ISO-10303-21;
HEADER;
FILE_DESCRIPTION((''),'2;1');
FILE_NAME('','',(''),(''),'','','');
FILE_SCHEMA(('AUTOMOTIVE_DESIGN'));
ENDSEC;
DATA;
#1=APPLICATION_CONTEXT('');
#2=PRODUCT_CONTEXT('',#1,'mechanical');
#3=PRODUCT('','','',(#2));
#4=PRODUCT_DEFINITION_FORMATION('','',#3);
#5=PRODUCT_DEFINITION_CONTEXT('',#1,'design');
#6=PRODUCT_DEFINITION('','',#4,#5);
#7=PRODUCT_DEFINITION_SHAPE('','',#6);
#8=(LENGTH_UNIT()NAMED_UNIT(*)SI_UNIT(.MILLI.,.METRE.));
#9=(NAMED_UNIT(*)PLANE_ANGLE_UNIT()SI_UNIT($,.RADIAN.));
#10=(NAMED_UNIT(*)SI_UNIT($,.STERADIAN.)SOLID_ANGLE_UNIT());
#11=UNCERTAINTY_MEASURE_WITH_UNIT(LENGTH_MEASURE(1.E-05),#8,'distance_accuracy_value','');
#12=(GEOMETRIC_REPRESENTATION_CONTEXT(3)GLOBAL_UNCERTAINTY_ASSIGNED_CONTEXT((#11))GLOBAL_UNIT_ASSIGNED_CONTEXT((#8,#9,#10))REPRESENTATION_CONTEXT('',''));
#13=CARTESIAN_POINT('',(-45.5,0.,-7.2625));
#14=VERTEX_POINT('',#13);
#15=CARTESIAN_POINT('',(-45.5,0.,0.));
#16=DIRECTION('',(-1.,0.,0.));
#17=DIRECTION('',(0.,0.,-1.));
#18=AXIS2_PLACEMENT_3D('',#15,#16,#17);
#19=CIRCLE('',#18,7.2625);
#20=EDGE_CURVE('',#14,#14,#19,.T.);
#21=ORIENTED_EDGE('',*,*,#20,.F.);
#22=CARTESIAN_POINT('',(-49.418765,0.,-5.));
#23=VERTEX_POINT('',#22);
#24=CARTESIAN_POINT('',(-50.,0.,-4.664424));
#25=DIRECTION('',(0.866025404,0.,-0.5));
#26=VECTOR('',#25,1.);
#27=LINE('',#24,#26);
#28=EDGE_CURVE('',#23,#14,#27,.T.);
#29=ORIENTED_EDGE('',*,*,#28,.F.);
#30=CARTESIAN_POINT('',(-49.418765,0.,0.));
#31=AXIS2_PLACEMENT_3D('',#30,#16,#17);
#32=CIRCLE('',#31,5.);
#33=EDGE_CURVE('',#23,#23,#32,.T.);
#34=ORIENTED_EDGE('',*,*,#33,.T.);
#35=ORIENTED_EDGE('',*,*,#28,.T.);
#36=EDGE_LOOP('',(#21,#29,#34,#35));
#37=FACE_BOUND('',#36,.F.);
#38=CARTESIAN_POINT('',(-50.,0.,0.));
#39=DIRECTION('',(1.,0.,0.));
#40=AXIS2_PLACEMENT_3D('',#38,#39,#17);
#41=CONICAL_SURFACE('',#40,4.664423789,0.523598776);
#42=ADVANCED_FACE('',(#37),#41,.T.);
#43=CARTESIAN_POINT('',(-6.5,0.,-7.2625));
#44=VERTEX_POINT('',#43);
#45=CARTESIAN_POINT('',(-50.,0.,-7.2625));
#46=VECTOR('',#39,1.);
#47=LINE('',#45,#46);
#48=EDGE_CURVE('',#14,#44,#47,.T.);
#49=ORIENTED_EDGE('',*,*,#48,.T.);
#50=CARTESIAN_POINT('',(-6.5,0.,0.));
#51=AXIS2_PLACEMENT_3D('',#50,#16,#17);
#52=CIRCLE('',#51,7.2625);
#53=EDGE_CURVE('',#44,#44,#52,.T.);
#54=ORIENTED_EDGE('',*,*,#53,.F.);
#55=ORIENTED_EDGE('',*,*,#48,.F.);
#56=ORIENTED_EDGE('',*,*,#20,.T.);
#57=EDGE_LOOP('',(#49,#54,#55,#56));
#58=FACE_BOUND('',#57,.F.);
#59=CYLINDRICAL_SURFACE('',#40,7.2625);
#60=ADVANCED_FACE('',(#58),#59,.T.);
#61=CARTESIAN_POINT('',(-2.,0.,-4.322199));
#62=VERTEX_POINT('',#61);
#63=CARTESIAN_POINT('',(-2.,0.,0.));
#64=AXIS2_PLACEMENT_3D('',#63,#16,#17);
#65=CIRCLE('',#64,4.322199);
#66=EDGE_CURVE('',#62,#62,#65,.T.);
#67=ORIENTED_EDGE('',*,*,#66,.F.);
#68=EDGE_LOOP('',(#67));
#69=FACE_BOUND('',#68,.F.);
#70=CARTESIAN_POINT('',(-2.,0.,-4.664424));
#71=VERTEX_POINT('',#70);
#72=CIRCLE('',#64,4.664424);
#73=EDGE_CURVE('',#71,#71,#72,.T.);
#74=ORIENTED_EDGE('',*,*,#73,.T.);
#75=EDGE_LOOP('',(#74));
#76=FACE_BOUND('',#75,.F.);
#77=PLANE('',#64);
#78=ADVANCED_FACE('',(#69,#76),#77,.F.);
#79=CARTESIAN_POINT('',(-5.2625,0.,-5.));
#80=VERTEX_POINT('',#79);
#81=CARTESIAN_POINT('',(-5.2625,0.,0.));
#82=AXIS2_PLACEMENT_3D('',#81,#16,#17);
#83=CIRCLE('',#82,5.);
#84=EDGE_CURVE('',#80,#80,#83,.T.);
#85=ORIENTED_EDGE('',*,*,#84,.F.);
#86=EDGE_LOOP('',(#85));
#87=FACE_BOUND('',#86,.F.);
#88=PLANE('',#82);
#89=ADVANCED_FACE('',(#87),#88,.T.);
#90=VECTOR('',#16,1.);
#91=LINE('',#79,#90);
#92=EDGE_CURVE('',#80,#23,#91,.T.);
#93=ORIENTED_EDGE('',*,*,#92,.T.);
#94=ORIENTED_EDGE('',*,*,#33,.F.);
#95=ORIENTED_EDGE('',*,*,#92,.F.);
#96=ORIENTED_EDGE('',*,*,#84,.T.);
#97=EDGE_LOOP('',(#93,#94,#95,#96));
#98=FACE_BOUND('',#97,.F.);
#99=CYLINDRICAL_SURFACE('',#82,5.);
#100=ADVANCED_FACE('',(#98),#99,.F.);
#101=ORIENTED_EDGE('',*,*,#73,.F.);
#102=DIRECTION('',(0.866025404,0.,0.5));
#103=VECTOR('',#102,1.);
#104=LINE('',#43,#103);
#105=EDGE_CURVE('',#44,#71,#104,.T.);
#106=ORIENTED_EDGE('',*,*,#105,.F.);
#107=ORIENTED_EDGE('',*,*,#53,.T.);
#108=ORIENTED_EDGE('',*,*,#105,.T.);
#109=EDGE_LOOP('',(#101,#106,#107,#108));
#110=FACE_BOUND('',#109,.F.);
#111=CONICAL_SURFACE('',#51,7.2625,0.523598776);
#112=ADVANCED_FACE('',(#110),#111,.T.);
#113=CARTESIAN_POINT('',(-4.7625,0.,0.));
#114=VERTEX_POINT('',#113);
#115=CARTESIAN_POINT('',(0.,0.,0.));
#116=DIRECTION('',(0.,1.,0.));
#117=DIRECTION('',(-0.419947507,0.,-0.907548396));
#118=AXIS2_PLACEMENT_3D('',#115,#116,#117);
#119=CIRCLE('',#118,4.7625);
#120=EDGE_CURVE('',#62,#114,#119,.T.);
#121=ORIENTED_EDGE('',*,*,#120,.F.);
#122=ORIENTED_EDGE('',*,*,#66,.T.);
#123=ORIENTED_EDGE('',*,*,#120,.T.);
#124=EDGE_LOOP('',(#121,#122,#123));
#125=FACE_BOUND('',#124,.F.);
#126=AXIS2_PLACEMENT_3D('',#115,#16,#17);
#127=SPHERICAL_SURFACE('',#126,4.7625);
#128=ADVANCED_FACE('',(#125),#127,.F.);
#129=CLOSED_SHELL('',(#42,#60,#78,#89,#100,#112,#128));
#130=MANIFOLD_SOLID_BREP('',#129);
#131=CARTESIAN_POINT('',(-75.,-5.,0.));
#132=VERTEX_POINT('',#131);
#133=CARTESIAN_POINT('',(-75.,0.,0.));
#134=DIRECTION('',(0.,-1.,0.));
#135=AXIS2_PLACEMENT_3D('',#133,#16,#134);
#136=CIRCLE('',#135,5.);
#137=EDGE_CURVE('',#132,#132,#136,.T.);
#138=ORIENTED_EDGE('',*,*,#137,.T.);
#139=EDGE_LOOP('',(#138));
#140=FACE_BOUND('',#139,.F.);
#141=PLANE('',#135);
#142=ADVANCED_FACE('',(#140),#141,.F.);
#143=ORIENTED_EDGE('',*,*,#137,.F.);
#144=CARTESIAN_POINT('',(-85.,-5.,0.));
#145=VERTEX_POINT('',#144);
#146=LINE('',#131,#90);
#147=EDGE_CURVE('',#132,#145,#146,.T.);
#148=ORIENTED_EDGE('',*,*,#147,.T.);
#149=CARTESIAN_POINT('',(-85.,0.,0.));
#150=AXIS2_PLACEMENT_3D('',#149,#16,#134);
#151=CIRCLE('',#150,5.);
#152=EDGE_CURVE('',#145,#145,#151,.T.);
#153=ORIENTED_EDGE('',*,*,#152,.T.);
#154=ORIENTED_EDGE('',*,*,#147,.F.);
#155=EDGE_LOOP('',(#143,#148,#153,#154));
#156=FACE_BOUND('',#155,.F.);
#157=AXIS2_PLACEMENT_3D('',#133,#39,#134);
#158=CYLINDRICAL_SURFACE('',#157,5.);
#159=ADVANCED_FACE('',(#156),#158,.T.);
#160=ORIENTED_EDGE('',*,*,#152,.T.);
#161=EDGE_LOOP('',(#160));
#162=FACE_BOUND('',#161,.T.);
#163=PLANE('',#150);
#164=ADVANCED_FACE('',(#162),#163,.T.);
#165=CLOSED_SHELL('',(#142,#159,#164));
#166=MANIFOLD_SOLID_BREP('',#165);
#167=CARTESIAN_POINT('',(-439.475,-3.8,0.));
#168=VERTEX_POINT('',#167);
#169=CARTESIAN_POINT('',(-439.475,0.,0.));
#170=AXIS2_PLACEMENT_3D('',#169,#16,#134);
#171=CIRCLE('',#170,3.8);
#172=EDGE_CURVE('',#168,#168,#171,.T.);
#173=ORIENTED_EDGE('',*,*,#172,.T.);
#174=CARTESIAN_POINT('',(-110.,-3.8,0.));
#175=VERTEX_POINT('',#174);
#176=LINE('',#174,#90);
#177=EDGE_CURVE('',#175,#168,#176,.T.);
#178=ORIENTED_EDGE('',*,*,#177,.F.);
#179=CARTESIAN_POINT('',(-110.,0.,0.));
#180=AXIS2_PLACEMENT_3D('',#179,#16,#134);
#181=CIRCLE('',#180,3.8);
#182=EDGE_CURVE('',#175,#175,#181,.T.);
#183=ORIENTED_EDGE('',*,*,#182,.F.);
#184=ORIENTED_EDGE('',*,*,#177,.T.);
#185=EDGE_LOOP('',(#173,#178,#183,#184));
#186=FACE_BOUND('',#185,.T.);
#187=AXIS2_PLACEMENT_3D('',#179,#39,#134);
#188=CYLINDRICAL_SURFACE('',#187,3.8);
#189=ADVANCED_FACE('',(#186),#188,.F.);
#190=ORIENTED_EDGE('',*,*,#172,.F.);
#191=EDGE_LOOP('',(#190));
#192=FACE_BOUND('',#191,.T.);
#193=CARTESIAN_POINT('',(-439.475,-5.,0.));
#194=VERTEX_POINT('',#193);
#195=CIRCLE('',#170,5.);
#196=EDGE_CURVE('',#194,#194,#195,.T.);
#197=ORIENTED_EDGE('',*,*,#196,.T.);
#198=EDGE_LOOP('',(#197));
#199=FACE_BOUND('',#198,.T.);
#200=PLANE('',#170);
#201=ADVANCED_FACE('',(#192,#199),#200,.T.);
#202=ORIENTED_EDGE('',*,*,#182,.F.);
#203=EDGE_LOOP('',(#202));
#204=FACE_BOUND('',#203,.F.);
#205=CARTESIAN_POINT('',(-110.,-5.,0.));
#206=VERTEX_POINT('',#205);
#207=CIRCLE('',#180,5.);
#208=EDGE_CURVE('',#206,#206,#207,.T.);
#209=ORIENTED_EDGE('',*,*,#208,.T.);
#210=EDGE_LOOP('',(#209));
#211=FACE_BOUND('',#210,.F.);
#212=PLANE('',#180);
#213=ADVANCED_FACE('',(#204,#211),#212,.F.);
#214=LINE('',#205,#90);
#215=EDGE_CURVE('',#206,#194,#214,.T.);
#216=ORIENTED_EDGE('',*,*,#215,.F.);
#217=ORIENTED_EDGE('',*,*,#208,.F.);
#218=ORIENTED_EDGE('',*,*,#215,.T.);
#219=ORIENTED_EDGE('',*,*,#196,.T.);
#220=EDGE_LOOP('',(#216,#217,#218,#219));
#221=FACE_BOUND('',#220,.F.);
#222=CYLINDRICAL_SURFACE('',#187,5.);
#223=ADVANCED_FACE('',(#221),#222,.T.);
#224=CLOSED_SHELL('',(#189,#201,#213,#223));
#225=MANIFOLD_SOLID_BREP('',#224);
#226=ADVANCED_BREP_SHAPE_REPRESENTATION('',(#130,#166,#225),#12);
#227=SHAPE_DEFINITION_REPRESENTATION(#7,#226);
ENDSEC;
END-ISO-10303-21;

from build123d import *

# Parameters (mm, degrees)
F3_R     = 5
F4_DEPTH = 10
F6_R     = 5
F6_R_2   = 3.8
F7_DEPTH = 329.475


# Not quite as in the source:
# - a fillet or chamfer that OpenCascade refuses, or shapes differently, is made with other operations: its cross-section is extruded or revolved along the edge and cut away or added


with BuildPart() as f1:
    # F0 (on Front) → F1 (revolve)
    with BuildSketch(Plane.XZ):
        with BuildLine():
            Line((-50, -7.2625), (-2, -7.2625))
            Line((-2, -7.2625), (-2, -4.3221992377))
            ThreePointArc((-2, -4.3221992377), (-4.0128796549, -2.5648007964), (-4.7625, 0))
            Line((-4.7625, 0), (-5.2625, 0))
            Line((-5.2625, 0), (-5.2625, -5))
            Line((-5.2625, -5), (-50, -5))
            Line((-50, -5), (-50, -7.2625))
        make_face()
    revolve(axis=Axis((-5.0125, 0, 0), (-1, 0, 0)))

    # F8: chamfer of 4.5 x 2.5980762114 on 2 edges, made by hand

    # F8_s1 → F8_t2 (revolve, cut)
    with BuildSketch(Plane.XZ):
        Polygon((-50, -4.6644237886), (-45.5, -7.2625), (-50, -7.2625), align=None)
    revolve(axis=Axis((-50, 0, 0), (-1, 0, 0)), mode=Mode.SUBTRACT)

    # F8_s3 → F8_t4 (revolve, cut)
    with BuildSketch(Plane.XZ):
        Polygon((-6.5, -7.2625), (-2, -4.6644237886), (-2, -7.2625), align=None)
    revolve(axis=Axis((-2, 0, 0), (-1, 0, 0)), mode=Mode.SUBTRACT)


with BuildPart() as f4:
    # F3 (on offset) → F4 (new body)
    with BuildSketch(Plane(origin=(-75, 0, 0), x_dir=(0, -1, 0), z_dir=(-1, 0, 0))):
        Circle(F3_R)
    extrude(amount=F4_DEPTH)


with BuildPart() as f7:
    # F6 (on offset) → F7 (new body)
    with BuildSketch(Plane(origin=(-110, 0, 0), x_dir=(0, -1, 0), z_dir=(-1, 0, 0))):
        Circle(F6_R)
        Circle(F6_R_2, mode=Mode.SUBTRACT)
    extrude(amount=F7_DEPTH)


solid = Compound([f1.part, f4.part, f7.part])
